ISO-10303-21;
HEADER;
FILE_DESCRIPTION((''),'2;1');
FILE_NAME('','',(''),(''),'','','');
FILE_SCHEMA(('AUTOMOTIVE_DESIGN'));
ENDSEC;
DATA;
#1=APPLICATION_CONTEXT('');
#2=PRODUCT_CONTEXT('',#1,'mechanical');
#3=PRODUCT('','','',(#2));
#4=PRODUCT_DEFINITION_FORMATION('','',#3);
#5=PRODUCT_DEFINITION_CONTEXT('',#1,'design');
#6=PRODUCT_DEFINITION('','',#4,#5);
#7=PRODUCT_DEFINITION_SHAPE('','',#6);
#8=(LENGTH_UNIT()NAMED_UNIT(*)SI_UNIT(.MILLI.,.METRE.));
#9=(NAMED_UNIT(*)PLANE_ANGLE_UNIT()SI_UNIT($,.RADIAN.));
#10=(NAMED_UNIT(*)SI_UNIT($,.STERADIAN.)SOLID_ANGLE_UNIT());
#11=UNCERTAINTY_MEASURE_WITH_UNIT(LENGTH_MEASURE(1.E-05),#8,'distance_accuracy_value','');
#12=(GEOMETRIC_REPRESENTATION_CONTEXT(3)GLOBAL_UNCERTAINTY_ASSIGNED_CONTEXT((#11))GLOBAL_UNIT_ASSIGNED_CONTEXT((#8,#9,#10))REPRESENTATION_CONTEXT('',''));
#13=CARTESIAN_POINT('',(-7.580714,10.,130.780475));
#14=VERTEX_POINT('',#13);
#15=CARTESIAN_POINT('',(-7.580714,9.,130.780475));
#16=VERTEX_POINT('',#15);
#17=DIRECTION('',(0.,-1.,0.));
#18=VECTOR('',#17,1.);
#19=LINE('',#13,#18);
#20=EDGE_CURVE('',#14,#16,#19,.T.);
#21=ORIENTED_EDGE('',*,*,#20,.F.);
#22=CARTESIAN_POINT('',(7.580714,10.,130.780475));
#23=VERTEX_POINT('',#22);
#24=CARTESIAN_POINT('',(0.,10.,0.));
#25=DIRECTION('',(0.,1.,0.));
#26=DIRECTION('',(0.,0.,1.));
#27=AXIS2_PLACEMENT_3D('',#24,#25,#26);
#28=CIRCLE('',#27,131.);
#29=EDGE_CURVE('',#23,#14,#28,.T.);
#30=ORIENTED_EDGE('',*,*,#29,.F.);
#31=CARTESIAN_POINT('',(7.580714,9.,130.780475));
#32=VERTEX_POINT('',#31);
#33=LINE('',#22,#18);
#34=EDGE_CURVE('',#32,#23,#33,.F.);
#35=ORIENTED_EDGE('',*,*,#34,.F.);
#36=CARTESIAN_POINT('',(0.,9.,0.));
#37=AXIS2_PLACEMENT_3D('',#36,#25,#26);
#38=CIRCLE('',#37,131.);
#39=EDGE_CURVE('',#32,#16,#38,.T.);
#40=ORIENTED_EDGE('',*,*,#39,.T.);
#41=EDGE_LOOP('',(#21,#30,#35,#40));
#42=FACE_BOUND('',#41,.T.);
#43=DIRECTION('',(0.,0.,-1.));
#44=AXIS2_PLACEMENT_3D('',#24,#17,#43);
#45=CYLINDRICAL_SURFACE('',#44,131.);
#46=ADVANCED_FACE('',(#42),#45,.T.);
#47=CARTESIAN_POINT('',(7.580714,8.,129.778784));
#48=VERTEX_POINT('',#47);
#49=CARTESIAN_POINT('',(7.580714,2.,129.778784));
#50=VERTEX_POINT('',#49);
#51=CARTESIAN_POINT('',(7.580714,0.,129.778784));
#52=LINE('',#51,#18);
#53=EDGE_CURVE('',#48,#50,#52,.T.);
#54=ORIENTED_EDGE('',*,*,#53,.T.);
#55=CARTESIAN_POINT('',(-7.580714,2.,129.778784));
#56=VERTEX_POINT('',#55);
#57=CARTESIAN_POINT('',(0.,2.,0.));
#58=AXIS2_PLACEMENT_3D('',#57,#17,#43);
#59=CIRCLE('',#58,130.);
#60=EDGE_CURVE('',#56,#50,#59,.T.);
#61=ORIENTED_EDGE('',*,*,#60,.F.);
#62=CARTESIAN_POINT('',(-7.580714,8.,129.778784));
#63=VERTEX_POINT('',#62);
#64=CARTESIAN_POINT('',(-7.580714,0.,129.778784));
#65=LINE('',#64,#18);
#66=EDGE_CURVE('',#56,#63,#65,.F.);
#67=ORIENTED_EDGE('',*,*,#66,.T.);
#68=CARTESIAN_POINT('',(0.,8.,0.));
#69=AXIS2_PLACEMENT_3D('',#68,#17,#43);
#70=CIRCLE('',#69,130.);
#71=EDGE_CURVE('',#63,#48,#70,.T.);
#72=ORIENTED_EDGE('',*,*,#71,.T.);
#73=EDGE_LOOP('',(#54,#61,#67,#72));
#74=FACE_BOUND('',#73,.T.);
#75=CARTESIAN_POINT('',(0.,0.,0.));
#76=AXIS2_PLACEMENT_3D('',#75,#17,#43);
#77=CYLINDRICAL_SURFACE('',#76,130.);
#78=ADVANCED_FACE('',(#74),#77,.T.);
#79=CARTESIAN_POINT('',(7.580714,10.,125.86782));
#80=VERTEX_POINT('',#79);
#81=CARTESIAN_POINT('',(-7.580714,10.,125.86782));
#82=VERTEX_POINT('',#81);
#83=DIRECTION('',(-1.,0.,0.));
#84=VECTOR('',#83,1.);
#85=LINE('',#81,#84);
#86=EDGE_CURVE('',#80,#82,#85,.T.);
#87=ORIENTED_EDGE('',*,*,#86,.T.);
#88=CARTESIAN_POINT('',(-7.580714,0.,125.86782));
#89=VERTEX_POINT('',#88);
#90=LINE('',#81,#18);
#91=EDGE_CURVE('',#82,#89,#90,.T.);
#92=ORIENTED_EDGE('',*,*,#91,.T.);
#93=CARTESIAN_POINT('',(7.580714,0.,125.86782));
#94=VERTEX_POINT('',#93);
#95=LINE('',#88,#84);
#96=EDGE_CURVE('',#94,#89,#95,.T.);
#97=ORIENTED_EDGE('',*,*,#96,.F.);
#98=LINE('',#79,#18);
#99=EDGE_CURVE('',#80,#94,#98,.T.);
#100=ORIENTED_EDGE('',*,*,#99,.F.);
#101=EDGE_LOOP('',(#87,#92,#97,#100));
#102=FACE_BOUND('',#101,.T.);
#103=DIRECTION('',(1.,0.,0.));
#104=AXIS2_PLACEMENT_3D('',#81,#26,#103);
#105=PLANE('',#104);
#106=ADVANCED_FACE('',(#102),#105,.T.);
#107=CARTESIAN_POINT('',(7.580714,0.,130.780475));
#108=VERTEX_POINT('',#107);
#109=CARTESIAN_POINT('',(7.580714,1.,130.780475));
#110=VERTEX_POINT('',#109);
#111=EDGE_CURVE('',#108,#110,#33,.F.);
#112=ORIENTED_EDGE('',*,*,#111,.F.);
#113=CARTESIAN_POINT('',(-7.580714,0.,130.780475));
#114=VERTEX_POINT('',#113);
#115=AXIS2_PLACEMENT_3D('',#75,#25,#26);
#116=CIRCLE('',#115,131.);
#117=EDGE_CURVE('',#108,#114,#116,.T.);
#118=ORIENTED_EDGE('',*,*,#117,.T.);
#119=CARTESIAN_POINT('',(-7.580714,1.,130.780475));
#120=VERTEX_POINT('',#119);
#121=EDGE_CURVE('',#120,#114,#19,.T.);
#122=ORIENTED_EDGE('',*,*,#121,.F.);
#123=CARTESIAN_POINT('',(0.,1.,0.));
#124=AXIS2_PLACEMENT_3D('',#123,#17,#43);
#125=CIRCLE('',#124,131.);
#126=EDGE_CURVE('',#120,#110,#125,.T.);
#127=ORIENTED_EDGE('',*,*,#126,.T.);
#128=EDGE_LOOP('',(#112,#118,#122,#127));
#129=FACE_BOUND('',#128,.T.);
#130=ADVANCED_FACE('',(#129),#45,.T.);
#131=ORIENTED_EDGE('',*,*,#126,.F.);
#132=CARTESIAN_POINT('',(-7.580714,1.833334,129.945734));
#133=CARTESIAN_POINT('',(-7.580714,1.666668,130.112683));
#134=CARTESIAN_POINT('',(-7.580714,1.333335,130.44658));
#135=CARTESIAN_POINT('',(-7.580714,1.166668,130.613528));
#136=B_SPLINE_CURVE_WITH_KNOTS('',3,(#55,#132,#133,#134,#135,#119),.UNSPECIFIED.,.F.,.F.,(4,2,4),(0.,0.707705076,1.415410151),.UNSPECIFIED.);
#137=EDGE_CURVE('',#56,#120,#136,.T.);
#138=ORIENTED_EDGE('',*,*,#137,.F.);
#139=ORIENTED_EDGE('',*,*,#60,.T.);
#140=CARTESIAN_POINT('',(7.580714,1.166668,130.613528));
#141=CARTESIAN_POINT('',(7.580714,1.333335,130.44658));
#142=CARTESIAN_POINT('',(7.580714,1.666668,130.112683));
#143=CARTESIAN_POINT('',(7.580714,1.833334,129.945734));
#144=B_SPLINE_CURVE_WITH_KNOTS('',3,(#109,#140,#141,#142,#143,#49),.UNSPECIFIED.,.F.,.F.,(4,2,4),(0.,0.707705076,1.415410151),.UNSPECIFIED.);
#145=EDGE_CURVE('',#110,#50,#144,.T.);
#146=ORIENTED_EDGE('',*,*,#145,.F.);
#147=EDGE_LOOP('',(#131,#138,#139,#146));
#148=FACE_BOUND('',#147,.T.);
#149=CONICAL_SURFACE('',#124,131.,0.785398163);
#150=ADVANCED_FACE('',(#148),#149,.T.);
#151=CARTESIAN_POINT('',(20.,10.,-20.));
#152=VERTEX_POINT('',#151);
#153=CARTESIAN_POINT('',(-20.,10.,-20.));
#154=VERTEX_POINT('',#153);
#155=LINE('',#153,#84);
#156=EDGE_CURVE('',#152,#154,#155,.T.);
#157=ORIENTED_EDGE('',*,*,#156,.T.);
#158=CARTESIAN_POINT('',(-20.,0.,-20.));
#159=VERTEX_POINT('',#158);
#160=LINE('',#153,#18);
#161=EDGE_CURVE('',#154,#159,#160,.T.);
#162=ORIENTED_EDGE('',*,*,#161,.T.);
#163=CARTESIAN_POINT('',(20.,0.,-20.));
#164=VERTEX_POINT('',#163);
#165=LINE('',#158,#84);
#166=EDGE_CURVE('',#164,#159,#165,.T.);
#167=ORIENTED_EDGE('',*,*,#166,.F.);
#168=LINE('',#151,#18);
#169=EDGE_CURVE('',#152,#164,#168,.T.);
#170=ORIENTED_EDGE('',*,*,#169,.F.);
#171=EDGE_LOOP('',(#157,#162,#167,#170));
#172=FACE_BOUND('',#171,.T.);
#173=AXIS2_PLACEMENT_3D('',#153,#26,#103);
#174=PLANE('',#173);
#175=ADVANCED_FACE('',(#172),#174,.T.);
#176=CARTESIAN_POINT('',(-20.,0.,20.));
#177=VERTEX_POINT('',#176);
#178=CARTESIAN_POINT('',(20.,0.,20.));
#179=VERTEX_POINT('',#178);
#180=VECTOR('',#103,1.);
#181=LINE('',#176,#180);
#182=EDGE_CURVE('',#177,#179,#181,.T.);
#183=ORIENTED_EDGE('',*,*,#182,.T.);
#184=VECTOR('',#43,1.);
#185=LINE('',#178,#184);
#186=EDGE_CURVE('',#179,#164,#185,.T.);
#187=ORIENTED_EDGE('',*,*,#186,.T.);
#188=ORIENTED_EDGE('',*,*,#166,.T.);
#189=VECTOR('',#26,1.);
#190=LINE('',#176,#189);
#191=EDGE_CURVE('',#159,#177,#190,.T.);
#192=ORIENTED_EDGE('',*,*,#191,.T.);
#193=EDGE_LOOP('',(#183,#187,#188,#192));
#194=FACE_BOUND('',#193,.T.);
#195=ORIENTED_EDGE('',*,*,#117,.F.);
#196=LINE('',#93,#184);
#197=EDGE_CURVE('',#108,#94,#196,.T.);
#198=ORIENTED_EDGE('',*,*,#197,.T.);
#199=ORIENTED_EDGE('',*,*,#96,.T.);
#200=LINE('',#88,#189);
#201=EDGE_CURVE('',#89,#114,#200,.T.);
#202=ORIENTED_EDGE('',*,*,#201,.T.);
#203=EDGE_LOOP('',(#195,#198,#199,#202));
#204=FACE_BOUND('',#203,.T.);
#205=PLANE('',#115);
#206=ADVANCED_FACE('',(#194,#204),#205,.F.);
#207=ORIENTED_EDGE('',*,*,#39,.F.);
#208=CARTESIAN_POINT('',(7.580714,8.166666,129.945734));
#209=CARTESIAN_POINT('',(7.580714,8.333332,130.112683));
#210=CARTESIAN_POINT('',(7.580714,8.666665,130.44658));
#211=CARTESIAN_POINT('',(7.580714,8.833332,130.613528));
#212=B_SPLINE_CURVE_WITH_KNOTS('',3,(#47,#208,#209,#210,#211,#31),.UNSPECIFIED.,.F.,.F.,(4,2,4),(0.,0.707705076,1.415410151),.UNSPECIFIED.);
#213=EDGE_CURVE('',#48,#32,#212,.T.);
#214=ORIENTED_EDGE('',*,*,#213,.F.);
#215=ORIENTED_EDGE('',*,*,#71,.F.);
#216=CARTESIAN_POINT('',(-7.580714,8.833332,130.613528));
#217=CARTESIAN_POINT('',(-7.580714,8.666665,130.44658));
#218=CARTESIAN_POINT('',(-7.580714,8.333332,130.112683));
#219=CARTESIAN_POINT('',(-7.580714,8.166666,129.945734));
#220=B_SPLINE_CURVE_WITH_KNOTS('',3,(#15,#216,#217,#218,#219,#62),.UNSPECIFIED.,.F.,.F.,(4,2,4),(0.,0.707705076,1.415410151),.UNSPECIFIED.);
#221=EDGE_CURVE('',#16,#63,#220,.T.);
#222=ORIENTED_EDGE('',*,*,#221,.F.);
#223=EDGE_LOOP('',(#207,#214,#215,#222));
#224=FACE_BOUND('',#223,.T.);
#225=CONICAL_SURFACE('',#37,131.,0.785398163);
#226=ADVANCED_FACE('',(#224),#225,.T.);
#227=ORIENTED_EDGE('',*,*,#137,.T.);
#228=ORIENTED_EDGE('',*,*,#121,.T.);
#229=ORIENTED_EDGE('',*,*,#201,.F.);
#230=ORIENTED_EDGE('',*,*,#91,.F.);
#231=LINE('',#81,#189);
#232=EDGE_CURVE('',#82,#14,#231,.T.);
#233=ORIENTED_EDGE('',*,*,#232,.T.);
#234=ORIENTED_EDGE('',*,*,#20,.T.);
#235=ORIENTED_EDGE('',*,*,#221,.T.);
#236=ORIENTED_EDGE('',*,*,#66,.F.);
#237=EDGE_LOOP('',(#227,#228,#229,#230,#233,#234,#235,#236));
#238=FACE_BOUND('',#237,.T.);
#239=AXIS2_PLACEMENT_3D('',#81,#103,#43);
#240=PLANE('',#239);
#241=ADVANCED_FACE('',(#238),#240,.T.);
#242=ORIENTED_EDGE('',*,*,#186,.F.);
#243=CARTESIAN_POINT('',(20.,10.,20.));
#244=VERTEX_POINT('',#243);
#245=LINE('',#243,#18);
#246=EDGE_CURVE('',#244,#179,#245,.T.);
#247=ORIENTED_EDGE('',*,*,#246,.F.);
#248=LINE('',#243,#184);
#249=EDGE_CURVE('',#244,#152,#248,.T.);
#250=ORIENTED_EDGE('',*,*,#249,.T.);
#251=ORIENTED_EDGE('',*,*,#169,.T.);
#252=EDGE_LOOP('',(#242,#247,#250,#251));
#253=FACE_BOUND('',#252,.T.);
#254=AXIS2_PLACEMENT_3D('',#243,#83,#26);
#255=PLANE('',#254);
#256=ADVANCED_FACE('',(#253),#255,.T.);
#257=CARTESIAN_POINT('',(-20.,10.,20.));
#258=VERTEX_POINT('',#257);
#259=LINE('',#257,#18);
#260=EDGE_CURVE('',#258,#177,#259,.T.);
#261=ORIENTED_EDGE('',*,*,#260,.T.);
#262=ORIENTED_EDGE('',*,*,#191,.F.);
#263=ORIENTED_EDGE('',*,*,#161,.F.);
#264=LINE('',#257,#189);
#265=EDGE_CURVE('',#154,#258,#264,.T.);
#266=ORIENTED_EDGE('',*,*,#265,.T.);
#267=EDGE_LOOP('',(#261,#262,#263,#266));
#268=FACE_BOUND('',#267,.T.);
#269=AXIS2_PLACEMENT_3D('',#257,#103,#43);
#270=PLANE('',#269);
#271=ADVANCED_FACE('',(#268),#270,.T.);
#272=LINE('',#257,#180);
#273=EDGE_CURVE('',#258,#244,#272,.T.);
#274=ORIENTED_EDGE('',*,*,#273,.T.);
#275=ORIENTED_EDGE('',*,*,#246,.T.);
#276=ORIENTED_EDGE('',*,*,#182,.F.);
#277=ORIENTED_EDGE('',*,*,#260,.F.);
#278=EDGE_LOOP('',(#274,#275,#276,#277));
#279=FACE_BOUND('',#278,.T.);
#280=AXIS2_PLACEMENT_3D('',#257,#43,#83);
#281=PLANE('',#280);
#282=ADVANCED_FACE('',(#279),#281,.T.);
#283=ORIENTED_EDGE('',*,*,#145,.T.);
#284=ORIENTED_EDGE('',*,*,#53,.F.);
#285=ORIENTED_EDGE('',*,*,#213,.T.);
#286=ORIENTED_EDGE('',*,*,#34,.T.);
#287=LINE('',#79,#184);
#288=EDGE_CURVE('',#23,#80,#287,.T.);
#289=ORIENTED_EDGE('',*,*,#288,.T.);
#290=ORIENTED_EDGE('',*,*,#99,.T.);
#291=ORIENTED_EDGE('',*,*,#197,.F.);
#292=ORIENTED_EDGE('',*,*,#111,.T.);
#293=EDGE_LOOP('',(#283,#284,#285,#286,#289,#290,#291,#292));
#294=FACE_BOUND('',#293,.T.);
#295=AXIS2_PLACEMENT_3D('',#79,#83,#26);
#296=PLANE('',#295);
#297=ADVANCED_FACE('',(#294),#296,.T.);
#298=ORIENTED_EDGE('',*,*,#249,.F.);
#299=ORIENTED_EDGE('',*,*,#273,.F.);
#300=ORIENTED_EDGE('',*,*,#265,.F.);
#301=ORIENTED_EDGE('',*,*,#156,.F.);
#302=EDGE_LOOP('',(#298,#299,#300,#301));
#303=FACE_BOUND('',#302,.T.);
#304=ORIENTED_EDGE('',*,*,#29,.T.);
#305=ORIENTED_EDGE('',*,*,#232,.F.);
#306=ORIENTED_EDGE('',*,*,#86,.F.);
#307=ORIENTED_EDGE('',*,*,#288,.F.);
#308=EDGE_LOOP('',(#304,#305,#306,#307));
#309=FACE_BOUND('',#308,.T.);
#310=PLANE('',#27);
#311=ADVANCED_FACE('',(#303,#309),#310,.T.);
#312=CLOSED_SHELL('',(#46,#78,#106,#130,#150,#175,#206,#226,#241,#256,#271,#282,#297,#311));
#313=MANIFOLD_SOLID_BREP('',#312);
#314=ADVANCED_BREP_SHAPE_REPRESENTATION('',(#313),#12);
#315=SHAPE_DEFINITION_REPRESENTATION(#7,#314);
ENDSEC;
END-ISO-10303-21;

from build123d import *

# Parameters (mm, degrees)
SKIZZE1_R                       = 131
SKIZZE1_W                       = 40
SKIZZE1_H                       = 40
AUFSATZ_LINEAR_AUSTRAGEN1_DEPTH = 10
SKIZZE2_W                       = 15.161428906
SKIZZE2_H                       = 7.514920765
SCHNITT_LINEAR_AUSTRAGEN1_DEPTH = 186.531668456
FASE1_SIZE                      = 1


with BuildPart() as part:
    # Skizze1 → Aufsatz-Linear austragen1 (new body)
    with BuildSketch(Plane(origin=(0, 0, 0), x_dir=(1, 0, 0), z_dir=(0, 1, 0))):
        with Locations(Location((0, 0, 0), (0, 0, 270))):
            Circle(SKIZZE1_R)
        Rectangle(SKIZZE1_W, SKIZZE1_H, mode=Mode.SUBTRACT)
    extrude(amount=AUFSATZ_LINEAR_AUSTRAGEN1_DEPTH)

    # Skizze2 → Schnitt-Linear austragen1 (cut, through all)
    with BuildSketch(Plane(origin=(0, 0, 0), x_dir=(1, 0, 0), z_dir=(0, 1, 0))):
        with Locations((0, -129.62528039)):
            Rectangle(SKIZZE2_W, SKIZZE2_H)
    extrude(amount=SCHNITT_LINEAR_AUSTRAGEN1_DEPTH, mode=Mode.SUBTRACT)

    # Skizze4 → Schnitt-Rotation2 (revolve, cut)
    with BuildSketch(Plane(origin=(0, 0, 0), x_dir=(0, 0, -1), z_dir=(1, 0, 0))):
        Polygon((131, 8), (130, 8), (130, 2), (131, 2), (133.611882568, 2), (133.611882568, 8), align=None)
    revolve(axis=Axis((0, 0, 0), (0, 1, 0)), mode=Mode.SUBTRACT)

    # Fase1
    fase1_edges = [part.edges().sort_by_distance(p)[0] for p in [
        (0, 8, -131),
        (0, 2, -131),
    ]]
    chamfer(fase1_edges, length=FASE1_SIZE - 0.0001)  # a hair under: the kernel refuses the full size


solid = part.part
